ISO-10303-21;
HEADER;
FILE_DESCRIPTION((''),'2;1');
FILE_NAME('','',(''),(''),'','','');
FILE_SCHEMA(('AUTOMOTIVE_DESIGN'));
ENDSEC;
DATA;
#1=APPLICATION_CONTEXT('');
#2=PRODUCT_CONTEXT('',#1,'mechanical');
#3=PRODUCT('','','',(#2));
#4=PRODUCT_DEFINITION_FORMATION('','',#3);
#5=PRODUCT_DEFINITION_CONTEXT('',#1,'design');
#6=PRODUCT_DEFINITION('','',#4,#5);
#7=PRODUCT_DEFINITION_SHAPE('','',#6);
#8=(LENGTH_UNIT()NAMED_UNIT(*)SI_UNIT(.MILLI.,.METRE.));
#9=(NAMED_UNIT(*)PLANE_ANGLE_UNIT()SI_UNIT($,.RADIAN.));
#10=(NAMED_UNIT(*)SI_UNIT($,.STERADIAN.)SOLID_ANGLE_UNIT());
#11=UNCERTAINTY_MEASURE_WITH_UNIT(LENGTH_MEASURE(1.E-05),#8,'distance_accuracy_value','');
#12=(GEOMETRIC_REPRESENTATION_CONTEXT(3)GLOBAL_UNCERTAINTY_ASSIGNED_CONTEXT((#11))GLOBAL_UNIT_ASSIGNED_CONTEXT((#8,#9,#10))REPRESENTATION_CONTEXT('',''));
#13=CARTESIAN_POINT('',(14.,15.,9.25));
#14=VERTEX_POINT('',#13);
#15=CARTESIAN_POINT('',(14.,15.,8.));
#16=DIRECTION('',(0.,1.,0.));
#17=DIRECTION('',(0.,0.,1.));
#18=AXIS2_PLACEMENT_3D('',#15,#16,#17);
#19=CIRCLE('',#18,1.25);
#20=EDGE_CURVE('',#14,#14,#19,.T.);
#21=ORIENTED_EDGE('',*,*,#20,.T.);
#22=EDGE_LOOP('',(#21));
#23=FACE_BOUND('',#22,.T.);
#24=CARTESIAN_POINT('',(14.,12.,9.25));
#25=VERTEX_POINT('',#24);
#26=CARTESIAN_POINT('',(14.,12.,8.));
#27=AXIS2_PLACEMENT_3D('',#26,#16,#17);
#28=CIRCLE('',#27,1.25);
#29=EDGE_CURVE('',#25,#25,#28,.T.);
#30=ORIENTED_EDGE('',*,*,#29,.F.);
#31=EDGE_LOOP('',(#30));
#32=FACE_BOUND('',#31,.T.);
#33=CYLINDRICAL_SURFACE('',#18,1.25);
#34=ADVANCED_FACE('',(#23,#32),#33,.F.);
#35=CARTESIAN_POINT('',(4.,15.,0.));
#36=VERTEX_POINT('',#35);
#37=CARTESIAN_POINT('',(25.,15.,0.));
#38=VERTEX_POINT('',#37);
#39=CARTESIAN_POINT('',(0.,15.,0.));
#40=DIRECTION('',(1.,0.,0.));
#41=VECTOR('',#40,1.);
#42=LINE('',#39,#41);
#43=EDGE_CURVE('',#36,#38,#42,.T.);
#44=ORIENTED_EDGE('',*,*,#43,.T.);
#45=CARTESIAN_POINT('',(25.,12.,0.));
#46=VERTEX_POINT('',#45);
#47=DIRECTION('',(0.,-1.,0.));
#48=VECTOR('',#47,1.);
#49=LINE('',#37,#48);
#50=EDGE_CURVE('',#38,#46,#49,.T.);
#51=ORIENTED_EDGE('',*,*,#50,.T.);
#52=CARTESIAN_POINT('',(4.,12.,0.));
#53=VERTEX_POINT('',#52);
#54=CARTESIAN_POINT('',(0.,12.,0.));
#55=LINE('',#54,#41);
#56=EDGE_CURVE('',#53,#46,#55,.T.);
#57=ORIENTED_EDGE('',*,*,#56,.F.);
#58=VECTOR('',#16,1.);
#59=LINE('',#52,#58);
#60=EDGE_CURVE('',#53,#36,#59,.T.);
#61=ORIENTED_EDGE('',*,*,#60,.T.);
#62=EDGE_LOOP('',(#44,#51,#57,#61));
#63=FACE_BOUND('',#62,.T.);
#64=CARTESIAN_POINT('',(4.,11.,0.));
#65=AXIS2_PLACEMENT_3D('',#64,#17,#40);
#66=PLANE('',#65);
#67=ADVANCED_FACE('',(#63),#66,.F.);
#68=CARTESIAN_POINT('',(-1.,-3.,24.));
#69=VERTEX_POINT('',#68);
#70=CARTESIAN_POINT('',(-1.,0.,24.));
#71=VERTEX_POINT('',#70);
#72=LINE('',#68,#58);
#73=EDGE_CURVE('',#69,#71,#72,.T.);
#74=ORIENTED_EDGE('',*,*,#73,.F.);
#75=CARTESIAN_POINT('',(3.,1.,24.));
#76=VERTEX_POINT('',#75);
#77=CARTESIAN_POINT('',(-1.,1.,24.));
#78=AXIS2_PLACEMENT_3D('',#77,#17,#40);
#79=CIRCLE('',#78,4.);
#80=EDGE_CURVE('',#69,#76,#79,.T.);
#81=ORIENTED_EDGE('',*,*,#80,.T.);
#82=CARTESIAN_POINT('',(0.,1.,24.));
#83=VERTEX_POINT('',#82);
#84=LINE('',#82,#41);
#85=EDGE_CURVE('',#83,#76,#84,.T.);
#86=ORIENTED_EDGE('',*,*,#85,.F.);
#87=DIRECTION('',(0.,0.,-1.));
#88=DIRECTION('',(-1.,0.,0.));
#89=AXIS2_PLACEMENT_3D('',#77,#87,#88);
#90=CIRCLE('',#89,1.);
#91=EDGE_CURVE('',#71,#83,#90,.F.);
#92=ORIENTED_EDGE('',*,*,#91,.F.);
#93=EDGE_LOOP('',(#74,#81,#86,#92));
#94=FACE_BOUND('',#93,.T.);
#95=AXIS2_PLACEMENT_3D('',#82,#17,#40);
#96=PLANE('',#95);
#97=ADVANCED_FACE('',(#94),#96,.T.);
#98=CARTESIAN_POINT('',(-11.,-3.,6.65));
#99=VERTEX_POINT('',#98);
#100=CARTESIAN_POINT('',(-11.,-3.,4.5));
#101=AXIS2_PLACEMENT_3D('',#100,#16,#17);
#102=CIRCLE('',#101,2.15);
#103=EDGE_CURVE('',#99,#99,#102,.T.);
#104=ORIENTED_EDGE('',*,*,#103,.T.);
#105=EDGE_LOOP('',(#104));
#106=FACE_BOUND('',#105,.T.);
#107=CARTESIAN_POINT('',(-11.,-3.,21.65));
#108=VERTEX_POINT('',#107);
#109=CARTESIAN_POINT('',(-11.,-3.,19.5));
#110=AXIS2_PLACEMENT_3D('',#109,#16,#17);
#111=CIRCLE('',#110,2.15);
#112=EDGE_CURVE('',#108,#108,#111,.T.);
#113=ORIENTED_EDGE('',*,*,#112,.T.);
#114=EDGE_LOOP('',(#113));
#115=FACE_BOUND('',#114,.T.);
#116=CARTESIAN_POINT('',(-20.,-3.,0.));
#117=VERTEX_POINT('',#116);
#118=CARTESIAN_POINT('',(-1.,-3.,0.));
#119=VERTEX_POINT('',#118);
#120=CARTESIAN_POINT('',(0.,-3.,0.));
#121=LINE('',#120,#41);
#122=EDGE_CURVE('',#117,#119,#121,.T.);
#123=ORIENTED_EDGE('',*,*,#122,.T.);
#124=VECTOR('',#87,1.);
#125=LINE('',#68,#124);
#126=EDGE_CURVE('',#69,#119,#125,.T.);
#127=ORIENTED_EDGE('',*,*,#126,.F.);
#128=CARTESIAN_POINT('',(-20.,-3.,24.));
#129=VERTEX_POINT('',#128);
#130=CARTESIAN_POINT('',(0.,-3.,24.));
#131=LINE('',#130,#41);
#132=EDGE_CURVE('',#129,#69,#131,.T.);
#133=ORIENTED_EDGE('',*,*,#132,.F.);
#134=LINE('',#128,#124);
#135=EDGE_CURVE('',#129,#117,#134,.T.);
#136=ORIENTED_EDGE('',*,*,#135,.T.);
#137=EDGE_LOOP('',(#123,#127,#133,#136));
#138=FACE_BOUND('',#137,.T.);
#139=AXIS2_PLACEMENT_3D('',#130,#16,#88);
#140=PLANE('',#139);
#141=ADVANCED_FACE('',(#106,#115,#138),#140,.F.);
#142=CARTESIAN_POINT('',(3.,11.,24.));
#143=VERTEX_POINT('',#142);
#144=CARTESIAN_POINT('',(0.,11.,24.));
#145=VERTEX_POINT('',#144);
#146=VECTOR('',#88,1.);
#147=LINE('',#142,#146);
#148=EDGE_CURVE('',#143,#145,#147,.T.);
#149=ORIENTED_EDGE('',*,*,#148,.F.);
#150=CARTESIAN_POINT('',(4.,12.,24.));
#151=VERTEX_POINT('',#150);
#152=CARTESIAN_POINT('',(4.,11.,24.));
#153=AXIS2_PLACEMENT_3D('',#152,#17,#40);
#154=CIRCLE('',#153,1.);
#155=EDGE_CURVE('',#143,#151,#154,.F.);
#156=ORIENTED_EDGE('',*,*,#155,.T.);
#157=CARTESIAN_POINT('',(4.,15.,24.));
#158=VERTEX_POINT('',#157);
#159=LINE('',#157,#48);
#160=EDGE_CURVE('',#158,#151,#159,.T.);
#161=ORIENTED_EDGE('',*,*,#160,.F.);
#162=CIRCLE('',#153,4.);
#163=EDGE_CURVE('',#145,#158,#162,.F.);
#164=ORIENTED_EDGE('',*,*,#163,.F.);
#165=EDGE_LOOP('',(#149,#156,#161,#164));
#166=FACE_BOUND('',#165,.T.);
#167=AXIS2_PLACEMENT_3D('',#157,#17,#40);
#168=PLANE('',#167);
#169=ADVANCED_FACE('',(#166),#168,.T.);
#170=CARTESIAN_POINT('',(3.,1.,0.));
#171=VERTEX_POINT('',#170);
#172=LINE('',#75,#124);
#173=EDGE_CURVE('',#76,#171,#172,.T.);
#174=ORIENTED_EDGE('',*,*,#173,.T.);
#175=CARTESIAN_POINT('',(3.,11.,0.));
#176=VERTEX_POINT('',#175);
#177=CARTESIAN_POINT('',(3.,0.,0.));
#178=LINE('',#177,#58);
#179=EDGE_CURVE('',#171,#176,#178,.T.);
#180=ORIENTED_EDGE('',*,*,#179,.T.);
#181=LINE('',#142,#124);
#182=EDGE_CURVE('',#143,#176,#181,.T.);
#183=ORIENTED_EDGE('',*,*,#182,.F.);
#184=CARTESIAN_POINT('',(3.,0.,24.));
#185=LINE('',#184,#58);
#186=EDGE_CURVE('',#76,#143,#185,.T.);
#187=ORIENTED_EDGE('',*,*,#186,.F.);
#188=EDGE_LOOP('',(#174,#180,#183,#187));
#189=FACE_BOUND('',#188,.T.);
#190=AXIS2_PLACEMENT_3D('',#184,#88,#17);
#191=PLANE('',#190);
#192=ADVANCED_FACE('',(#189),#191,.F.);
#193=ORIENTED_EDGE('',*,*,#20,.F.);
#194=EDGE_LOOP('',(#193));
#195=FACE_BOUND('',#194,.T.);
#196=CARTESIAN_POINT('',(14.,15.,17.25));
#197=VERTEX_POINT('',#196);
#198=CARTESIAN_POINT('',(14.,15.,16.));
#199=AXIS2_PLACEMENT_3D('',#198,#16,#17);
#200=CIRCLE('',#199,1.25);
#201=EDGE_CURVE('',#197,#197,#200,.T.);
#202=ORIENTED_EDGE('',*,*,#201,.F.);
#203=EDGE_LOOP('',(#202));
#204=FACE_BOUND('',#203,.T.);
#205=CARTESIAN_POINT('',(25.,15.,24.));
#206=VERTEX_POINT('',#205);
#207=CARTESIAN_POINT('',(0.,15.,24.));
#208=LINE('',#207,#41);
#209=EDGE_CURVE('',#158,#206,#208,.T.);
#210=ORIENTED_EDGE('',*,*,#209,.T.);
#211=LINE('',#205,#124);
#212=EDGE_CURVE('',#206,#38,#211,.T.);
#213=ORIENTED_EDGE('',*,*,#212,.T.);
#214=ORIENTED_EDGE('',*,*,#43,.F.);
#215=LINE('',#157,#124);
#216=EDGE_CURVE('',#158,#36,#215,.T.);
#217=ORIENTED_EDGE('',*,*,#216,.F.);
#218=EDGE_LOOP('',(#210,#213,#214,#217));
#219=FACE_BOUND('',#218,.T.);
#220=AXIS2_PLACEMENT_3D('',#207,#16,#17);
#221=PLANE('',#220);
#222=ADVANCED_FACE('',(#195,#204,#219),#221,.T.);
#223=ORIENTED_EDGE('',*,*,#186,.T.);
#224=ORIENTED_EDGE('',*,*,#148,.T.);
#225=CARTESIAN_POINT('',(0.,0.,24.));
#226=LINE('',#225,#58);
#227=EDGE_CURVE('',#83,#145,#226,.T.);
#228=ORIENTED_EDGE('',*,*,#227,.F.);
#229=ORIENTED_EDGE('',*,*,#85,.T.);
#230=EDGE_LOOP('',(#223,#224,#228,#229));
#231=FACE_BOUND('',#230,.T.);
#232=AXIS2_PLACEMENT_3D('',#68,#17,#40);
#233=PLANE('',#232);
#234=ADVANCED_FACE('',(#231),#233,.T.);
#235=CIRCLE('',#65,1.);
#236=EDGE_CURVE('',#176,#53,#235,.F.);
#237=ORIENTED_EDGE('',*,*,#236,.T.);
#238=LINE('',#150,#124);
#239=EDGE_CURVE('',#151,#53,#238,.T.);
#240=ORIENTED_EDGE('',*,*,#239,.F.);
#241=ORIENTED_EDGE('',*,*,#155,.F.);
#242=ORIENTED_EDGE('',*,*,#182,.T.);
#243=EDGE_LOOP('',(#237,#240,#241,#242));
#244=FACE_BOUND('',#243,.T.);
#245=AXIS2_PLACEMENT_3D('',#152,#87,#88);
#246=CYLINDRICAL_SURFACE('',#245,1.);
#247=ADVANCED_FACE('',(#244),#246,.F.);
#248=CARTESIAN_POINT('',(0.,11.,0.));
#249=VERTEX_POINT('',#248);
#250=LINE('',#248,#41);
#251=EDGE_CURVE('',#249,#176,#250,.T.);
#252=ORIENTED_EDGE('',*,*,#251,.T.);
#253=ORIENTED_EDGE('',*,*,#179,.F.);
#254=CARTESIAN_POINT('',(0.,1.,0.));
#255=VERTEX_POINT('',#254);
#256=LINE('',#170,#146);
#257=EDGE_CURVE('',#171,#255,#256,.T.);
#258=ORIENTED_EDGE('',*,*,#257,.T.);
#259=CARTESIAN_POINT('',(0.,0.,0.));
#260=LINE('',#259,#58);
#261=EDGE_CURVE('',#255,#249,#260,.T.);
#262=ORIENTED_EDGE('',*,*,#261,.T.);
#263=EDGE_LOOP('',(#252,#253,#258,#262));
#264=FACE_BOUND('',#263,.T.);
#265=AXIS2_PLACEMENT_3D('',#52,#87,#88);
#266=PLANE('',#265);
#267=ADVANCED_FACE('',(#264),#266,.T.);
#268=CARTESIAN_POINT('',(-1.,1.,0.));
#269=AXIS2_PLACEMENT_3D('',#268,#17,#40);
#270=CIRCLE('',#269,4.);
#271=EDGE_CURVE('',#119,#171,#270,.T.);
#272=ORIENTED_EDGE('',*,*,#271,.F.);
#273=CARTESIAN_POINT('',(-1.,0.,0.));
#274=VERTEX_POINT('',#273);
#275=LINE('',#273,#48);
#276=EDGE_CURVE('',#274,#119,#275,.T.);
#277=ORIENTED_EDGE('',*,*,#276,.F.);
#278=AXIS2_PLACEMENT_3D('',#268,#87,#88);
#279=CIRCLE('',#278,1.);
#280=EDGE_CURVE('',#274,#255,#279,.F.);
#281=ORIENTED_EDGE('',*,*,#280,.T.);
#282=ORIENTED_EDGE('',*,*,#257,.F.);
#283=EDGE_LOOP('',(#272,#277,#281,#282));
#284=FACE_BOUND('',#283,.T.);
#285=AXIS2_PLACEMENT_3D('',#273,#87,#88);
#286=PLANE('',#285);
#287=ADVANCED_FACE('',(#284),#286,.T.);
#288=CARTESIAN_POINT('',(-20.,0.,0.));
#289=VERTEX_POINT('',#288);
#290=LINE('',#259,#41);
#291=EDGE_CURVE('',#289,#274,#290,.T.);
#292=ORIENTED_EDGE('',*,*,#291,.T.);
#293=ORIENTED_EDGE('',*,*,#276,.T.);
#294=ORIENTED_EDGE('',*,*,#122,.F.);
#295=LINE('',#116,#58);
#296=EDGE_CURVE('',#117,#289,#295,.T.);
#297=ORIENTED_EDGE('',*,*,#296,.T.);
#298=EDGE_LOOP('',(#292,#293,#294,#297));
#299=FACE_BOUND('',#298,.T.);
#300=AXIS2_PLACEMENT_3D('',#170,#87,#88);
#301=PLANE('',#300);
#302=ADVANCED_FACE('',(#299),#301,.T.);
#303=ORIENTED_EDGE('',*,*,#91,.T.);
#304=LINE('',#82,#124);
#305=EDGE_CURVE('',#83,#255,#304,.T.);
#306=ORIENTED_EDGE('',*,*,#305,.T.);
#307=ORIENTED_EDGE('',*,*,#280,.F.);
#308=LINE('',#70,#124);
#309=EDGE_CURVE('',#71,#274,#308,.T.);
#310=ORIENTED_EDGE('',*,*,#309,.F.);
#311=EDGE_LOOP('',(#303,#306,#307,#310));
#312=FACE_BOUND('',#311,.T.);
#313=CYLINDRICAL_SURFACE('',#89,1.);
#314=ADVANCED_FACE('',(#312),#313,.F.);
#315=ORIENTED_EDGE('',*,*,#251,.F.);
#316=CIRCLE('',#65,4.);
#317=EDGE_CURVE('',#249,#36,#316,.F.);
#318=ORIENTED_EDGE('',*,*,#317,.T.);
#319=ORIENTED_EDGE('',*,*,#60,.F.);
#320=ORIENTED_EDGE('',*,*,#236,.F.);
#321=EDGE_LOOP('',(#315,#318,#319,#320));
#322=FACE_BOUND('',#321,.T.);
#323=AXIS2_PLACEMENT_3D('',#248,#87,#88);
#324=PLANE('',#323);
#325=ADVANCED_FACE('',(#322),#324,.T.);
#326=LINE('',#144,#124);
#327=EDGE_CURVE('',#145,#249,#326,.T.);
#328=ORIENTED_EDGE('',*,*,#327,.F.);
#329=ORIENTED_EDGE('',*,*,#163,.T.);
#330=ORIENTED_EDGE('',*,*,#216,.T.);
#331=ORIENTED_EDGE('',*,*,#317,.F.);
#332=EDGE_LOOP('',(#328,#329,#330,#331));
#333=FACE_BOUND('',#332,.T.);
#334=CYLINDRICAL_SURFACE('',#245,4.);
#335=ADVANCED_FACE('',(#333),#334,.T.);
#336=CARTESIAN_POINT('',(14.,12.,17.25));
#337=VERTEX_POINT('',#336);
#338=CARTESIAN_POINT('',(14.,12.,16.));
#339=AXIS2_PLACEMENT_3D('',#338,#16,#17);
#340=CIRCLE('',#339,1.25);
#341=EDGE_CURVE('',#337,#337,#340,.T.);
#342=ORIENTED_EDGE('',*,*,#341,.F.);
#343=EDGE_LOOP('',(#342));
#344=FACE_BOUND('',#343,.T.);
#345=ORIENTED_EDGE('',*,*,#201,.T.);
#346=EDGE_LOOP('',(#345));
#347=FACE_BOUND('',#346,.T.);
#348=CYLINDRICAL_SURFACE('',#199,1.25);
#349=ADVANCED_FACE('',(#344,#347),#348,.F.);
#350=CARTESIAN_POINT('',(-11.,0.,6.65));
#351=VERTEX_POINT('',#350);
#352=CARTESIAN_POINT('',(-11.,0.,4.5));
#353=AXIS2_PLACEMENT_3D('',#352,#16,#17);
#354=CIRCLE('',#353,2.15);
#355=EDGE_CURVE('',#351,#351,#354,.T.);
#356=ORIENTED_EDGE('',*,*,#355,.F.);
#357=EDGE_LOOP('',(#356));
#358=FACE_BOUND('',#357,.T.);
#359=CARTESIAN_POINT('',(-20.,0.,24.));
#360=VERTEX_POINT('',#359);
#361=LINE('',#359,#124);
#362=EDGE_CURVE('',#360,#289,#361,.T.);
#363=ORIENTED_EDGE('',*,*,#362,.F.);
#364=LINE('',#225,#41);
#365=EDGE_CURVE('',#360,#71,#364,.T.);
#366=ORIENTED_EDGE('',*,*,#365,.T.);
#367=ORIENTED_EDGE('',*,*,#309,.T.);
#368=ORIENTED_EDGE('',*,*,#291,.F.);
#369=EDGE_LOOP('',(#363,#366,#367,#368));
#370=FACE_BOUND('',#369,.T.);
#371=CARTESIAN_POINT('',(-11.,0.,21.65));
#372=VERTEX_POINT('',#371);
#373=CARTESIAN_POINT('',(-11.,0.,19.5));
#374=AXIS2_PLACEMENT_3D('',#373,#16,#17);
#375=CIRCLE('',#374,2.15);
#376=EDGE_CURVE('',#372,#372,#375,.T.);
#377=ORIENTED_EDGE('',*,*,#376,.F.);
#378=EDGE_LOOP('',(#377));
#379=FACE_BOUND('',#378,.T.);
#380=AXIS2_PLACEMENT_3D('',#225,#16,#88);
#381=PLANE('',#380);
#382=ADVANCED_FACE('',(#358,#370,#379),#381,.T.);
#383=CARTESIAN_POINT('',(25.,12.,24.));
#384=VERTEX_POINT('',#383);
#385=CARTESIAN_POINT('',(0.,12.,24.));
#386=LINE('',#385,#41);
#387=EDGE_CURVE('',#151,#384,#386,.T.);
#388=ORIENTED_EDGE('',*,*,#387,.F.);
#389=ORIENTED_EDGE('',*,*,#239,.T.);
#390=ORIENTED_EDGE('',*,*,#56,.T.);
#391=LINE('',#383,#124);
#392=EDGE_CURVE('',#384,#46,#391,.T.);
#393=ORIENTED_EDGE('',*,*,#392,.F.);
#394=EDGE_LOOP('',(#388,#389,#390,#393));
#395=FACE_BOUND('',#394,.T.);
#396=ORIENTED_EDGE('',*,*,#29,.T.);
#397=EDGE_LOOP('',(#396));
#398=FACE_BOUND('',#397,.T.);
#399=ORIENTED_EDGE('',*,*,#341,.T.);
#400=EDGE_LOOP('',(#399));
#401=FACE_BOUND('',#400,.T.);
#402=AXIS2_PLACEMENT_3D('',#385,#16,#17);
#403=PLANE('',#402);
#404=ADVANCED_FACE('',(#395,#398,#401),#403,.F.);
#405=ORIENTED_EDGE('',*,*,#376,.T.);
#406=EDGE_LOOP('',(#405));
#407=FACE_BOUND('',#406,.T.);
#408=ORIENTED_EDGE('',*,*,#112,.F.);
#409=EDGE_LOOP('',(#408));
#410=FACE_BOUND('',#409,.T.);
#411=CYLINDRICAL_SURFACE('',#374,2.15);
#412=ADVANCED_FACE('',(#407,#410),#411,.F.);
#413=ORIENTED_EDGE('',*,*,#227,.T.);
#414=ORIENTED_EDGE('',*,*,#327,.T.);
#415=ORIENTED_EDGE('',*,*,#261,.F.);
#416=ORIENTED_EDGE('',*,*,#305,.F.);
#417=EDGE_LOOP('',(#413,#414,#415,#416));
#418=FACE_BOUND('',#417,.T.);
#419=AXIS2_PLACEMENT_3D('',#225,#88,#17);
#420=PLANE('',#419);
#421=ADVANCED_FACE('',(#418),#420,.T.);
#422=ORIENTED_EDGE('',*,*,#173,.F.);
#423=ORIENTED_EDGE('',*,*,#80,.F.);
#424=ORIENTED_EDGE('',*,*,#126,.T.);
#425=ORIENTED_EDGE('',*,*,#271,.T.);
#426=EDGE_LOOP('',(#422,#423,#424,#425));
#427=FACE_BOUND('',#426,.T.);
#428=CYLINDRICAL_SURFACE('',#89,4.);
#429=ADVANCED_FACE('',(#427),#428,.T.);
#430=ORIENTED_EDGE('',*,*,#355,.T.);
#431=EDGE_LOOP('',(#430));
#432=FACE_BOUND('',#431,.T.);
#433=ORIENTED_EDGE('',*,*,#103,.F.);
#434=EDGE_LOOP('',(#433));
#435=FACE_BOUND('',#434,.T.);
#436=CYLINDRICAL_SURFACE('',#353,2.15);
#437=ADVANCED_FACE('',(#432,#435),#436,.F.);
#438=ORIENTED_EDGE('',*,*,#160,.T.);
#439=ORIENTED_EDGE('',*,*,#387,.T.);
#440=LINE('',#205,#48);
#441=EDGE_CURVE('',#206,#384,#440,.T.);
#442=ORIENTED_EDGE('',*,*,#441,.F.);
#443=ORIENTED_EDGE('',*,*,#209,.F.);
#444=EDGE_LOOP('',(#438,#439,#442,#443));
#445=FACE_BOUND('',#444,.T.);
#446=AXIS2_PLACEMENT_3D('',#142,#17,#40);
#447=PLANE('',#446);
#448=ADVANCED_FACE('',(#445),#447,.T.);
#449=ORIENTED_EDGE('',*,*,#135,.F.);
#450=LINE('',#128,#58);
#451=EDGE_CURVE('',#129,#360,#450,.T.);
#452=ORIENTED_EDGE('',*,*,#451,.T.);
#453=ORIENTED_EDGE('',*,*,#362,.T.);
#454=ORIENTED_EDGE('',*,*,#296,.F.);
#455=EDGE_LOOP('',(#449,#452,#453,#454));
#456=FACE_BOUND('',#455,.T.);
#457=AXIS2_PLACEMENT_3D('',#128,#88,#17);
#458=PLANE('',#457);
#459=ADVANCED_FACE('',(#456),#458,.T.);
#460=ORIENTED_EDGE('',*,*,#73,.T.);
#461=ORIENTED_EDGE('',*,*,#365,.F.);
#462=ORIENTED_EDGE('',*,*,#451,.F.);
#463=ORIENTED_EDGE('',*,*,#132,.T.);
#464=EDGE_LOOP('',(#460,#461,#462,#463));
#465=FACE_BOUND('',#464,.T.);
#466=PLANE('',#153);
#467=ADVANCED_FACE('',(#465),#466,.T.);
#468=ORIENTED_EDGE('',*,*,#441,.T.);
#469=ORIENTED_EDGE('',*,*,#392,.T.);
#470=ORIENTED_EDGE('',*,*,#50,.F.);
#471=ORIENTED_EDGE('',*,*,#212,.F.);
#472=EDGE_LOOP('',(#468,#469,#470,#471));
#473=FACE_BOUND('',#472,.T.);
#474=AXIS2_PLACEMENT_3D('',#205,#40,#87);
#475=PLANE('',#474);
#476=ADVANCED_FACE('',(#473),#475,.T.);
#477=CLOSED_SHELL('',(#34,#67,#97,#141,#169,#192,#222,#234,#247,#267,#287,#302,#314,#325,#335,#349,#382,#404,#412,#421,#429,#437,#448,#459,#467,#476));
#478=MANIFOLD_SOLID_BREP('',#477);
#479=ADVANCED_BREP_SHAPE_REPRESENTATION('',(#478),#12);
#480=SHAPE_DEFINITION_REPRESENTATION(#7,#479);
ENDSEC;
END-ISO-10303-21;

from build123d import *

# Parameters (mm, degrees)
SM_BASE_FLANGE_1_DEPTH = 24
HOLE_WIZARD_M4_1_D     = 4.3
M3X0_5_1_D             = 2.5


# Sheet-metal steps are written as plain solids
with BuildPart() as part:
    # Sketch 1 → 基材-凸緣1 (new body)
    with BuildSketch(Plane.XY):
        with BuildLine():
            Line((25, 15), (4, 15))
            ThreePointArc((4, 15), (1.171572875, 13.828427125), (0, 11))
            Line((0, 11), (0, 1))
            ThreePointArc((0, 1), (-0.292893219, 0.292893219), (-1, 0))
            Line((-1, 0), (-20, 0))
            Line((-20, 0), (-20, -3))
            Line((-20, -3), (-1, -3))
            ThreePointArc((-1, -3), (1.828427125, -1.828427125), (3, 1))
            Line((3, 1), (3, 11))
            ThreePointArc((3, 11), (3.292893219, 11.707106781), (4, 12))
            Line((4, 12), (25, 12))
            Line((25, 12), (25, 15))
        make_face()
    extrude(amount=SM_BASE_FLANGE_1_DEPTH)

    # M4 餘隙孔1 (through all)
    with Locations(Plane(origin=(0, 0, 0), x_dir=(1, 0, 0), z_dir=(0, 1, 0))):
        with Locations((-11, -19.5), (-11, -4.5)):
            Hole(HOLE_WIZARD_M4_1_D / 2)

    # M3x0.5 螺紋孔1 (through all)
    with Locations(Plane(origin=(0, 15, 0), x_dir=(1, 0, 0), z_dir=(0, 1, 0))):
        with Locations((14, -16), (14, -8)):
            Hole(M3X0_5_1_D / 2)


solid = part.part
